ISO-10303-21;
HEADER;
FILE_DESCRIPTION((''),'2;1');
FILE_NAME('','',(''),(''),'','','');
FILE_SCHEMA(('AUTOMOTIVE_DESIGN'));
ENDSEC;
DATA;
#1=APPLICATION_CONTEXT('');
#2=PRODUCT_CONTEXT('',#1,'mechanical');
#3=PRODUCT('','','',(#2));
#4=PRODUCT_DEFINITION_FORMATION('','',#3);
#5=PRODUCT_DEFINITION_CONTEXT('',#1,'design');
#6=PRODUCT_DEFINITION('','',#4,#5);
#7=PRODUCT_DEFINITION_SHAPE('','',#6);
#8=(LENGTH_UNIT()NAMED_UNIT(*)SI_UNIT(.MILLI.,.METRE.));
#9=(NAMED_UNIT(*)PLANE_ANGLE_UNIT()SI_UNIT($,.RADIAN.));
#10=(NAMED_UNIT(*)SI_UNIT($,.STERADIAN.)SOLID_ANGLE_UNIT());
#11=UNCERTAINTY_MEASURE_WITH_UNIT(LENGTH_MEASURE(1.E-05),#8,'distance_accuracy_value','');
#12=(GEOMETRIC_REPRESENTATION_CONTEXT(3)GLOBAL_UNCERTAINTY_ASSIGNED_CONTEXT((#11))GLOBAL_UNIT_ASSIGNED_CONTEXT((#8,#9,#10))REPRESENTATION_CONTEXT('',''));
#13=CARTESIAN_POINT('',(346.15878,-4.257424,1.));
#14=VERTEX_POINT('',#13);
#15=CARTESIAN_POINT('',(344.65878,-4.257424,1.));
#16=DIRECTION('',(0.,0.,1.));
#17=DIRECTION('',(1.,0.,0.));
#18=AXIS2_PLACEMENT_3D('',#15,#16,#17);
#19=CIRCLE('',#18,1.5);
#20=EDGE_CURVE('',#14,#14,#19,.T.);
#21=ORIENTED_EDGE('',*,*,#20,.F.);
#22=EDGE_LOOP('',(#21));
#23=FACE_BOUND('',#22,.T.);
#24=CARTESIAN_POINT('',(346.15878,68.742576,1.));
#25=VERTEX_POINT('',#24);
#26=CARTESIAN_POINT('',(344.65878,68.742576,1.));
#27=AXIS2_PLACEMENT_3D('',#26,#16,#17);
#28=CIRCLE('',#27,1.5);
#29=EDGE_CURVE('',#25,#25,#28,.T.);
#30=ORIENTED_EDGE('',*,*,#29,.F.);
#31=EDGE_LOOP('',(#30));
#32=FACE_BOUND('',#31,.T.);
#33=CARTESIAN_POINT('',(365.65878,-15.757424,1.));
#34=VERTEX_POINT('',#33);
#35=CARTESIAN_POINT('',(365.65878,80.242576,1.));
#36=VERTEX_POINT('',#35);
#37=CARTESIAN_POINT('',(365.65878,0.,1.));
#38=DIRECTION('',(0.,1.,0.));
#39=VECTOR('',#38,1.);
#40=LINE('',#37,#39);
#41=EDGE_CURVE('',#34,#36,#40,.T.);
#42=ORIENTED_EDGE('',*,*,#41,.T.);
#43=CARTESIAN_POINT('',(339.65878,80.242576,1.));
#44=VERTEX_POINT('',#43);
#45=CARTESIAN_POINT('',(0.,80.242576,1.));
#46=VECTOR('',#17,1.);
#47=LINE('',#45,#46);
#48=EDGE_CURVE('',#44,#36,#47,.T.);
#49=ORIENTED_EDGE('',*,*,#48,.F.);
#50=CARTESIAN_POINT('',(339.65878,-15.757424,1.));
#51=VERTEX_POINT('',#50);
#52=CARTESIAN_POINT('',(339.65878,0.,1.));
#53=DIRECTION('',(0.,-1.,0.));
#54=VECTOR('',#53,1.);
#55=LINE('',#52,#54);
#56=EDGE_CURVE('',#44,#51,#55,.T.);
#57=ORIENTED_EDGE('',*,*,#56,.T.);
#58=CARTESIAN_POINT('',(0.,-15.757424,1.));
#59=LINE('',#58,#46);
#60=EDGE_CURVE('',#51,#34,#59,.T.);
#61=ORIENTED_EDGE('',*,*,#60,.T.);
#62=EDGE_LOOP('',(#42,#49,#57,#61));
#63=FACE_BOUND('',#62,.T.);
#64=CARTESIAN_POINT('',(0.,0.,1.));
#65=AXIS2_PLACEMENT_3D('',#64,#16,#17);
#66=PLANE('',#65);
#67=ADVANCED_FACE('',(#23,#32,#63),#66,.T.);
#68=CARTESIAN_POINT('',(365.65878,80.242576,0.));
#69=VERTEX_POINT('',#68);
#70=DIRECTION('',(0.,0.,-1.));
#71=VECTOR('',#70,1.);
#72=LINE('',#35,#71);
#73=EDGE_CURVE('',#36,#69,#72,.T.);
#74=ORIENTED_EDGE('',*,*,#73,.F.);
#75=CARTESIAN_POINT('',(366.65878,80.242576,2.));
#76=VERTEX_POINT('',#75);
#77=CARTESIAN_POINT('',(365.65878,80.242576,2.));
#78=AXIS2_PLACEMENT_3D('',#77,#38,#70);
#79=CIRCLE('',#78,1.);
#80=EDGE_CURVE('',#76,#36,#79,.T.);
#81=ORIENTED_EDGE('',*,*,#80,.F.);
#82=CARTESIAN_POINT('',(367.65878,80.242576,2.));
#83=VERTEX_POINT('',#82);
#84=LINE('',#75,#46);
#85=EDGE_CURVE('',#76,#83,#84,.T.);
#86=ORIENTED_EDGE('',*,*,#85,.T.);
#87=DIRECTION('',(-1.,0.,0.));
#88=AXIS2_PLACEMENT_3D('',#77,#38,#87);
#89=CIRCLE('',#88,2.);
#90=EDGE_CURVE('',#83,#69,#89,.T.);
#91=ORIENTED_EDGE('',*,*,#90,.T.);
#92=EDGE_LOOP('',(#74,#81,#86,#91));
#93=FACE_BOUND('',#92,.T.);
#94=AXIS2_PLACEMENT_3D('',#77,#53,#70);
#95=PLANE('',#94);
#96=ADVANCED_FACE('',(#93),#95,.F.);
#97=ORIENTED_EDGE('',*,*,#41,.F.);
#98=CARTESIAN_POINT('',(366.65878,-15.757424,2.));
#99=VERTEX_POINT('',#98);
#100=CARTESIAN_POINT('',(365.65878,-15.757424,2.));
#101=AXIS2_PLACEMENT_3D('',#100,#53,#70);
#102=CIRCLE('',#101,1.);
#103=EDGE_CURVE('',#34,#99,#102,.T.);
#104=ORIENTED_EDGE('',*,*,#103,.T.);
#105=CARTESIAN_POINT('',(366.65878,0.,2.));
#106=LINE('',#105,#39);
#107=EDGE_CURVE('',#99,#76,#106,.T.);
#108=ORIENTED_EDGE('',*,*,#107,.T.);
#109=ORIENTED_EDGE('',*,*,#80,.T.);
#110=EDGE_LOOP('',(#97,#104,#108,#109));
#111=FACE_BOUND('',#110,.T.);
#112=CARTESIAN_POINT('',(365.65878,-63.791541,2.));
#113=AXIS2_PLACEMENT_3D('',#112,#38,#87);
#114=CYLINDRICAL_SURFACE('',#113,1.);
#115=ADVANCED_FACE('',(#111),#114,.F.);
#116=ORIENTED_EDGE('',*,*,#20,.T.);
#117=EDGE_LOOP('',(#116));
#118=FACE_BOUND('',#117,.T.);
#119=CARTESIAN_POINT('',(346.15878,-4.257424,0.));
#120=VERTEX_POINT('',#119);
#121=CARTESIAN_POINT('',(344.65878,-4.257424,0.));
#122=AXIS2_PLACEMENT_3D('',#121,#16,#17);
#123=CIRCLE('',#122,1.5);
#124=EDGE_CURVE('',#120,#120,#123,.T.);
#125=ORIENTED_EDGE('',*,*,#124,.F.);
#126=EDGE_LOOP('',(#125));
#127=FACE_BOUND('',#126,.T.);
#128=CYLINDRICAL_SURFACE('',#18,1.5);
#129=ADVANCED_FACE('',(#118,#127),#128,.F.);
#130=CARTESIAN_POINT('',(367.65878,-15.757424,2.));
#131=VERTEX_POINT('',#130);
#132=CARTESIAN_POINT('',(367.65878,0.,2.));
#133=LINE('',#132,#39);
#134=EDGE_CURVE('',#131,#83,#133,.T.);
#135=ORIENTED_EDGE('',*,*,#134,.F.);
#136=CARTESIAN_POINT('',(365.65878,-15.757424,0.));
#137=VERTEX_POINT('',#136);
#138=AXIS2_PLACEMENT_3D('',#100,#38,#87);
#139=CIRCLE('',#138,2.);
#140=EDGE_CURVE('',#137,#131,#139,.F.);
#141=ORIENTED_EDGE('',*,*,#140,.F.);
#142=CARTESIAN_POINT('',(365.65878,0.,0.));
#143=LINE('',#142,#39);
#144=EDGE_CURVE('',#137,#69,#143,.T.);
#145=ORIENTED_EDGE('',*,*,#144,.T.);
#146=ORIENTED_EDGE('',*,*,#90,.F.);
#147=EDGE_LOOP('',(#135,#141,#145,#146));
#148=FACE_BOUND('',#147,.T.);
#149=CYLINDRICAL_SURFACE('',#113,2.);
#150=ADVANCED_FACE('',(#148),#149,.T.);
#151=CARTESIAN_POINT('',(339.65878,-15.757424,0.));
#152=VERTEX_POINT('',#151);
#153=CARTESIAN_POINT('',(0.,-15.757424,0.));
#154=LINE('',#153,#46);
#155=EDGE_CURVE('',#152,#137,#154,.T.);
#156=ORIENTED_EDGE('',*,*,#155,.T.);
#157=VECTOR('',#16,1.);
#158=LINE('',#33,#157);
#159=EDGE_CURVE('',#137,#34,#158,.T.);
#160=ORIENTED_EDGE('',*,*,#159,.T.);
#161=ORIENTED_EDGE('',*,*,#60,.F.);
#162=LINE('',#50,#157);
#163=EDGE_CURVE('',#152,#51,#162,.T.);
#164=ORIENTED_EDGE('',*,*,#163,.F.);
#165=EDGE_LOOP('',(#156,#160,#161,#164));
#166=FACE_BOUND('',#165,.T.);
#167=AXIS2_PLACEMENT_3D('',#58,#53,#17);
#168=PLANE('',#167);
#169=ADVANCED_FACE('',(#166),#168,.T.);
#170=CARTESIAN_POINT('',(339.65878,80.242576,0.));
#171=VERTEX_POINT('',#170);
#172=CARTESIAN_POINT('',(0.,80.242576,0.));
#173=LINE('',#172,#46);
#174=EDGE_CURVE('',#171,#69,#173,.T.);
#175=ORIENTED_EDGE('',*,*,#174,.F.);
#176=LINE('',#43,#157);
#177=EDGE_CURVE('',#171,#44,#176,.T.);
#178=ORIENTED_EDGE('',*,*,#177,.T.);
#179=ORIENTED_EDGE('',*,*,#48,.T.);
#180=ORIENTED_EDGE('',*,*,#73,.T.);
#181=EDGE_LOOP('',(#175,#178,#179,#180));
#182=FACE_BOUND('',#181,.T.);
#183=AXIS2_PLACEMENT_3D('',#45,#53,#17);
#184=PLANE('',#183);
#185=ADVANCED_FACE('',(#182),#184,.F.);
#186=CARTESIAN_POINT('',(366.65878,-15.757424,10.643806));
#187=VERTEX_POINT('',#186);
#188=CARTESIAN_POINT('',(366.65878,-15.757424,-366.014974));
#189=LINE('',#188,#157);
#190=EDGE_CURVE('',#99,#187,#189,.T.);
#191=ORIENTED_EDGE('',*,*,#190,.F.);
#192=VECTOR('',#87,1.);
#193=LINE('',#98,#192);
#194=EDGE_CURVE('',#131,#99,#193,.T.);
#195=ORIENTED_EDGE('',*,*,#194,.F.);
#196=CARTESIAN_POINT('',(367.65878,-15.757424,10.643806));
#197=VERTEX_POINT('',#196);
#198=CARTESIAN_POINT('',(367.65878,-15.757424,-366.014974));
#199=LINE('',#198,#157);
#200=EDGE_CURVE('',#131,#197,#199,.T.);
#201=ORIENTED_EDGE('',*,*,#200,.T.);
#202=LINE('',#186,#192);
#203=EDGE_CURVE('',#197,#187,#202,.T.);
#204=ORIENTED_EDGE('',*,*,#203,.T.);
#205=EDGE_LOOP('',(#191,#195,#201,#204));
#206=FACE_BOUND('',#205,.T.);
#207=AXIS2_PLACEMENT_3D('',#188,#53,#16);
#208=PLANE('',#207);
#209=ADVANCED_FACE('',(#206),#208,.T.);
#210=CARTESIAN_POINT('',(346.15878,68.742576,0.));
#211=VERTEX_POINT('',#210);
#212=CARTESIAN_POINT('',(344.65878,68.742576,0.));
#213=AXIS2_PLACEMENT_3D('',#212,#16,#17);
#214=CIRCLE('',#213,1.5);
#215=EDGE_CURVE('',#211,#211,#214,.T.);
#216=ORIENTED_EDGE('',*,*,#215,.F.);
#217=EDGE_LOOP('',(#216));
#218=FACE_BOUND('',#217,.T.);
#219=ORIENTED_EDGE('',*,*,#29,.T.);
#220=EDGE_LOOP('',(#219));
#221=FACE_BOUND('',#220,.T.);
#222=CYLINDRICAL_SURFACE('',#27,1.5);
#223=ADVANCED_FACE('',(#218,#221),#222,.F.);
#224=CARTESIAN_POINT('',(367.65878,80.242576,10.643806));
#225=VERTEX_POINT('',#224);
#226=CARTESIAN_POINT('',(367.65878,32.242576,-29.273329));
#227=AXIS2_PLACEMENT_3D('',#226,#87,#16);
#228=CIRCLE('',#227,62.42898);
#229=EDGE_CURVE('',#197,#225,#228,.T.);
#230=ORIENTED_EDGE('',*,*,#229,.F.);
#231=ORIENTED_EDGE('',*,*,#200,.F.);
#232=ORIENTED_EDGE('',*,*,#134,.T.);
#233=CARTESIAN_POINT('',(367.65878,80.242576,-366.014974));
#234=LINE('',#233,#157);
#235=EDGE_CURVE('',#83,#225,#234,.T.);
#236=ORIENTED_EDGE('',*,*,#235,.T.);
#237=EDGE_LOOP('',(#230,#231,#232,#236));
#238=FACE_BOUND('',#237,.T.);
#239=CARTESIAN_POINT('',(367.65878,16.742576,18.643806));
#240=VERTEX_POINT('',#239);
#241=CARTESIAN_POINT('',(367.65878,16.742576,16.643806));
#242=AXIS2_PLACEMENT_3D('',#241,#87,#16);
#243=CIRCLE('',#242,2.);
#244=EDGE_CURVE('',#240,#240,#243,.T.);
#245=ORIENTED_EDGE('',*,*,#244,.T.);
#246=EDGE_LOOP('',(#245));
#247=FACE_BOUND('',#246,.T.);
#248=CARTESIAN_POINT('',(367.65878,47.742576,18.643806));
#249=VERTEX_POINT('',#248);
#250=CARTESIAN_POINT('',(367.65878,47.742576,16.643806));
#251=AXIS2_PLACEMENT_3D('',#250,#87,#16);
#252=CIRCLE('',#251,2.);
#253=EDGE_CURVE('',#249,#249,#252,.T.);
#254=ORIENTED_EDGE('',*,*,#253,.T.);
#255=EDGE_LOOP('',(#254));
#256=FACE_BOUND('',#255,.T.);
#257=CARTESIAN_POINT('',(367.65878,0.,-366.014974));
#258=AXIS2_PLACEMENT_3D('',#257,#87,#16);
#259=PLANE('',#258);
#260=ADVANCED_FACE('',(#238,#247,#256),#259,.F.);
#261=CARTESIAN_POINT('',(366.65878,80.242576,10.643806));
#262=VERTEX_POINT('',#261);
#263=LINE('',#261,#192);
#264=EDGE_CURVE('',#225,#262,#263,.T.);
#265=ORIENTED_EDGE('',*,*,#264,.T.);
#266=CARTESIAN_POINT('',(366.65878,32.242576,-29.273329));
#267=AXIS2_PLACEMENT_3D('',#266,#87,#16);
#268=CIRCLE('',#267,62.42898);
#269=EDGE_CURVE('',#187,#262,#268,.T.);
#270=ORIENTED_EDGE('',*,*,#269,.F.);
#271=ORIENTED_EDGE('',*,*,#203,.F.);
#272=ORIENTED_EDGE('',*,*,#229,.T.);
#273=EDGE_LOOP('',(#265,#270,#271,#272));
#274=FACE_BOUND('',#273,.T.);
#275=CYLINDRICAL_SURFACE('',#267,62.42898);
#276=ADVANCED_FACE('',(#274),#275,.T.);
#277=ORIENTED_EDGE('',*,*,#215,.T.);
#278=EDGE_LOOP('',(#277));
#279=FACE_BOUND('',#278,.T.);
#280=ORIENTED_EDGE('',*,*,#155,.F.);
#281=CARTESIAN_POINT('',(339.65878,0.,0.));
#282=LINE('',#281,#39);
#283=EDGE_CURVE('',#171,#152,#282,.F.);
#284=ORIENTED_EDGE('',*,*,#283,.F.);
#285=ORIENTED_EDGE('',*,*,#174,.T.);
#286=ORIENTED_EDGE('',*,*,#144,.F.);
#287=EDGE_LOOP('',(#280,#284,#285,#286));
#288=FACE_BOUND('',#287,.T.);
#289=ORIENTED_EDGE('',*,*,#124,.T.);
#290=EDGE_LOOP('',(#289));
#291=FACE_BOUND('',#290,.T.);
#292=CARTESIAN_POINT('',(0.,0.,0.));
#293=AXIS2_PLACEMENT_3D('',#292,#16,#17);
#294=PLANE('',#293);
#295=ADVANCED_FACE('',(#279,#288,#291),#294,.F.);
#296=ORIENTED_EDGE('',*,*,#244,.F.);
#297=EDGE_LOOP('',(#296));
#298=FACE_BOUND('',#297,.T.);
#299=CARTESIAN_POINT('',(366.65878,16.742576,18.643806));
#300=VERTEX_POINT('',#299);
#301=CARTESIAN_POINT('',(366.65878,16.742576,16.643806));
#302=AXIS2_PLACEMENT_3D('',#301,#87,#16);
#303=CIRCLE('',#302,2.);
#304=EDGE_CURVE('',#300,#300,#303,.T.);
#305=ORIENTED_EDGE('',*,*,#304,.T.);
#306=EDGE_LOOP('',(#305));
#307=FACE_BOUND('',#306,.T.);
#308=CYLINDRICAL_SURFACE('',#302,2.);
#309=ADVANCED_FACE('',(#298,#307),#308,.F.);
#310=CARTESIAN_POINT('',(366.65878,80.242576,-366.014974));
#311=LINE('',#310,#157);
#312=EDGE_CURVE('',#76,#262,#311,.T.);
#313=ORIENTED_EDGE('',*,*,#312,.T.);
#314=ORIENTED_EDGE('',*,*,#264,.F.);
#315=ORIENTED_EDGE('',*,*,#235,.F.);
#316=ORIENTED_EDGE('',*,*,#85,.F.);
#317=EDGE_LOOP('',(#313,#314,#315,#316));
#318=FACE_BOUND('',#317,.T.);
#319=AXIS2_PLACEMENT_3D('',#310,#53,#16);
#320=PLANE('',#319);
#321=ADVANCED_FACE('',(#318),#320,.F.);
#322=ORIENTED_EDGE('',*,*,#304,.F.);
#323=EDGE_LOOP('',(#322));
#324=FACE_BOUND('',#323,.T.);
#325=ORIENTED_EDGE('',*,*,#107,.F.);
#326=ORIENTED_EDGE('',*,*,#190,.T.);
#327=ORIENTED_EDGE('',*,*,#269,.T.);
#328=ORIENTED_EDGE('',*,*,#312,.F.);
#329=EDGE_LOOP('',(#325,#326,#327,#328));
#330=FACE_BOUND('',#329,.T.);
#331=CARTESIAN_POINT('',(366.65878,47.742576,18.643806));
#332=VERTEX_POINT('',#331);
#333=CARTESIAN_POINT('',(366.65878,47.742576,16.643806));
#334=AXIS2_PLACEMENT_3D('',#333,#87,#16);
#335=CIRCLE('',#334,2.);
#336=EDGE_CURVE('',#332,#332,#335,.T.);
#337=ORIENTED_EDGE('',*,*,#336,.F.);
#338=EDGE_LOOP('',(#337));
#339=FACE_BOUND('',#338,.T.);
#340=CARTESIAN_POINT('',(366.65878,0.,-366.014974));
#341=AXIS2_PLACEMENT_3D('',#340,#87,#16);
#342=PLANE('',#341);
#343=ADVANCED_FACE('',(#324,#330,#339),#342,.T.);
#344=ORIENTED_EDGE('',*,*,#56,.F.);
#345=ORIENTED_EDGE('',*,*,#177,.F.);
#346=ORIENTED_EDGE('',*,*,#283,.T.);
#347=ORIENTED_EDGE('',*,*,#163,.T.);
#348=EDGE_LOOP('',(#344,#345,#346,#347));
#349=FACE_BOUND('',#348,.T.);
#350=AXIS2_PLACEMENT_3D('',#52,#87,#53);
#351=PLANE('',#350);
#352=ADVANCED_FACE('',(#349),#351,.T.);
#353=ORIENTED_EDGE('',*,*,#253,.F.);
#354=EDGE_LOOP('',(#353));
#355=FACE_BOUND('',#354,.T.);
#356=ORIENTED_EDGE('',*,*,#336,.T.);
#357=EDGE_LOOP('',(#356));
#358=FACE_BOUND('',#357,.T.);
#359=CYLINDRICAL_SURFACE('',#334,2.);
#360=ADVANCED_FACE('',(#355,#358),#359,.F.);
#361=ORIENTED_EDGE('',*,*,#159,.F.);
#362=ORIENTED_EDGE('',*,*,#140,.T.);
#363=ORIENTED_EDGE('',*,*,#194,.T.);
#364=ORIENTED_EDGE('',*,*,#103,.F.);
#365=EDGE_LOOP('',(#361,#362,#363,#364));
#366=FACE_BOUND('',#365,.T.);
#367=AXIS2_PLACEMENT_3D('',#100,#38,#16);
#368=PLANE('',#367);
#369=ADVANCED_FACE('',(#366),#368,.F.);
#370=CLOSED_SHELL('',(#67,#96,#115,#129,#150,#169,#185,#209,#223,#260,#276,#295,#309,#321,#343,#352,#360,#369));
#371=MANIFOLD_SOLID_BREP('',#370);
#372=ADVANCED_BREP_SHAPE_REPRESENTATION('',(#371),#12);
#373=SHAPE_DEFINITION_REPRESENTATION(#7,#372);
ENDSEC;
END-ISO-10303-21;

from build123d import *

# Parameters (mm, degrees)
IZIM1_W                     = 27
IZIM1_H                     = 96
IZIM1_R                     = 1.5
IZIM1_R_2                   = 2
Y_KSEKLIK_EKSTR_ZYON1_DEPTH = 1
IZGIDEN_START               = 367.447539798
IZGIDEN_B_KME1_OUTLINE_W    = 96
IZGIDEN_B_KME1_OUTLINE_H    = 1
IZGIDEN_B_KME1_DEPTH        = 32.552460202
IZGIDEN_START_2             = 365.658779798
IZGIDEN_B_KME1_2_OUTLINE_R  = 2
IZGIDEN_B_KME1_2_DEPTH      = 2
IZGIDEN_START_3             = -15.757423971
IZGIDEN_B_KME1_3_DEPTH      = 96


with BuildPart() as part:
    # Çizim1 → Yükseklik-Ekstrüzyon1 (new body)
    # profile 1 of 2: a face of its own
    with BuildSketch(Plane.XY):
        with Locations((353.158779798, 32.242576029)):
            Rectangle(IZIM1_W, IZIM1_H)
        with Locations((344.658779798, -4.257423971)):
            Circle(IZIM1_R, mode=Mode.SUBTRACT)
        with Locations((344.658779798, 68.742576029)):
            Circle(IZIM1_R, mode=Mode.SUBTRACT)
    # profile 2 of 2: a face of its own
    with BuildSketch(Plane.XY):
        with BuildLine():
            Line((376.658779798, 80.242576029), (366.658779798, 80.242576029))
            Line((366.658779798, 80.242576029), (366.658779798, -15.757423971))
            Line((366.658779798, -15.757423971), (376.658779798, -15.757423971))
            ThreePointArc((376.658779798, -15.757423971), (399.170626089, 32.242576029), (376.658779798, 80.242576029))
        make_face()
        with Locations((382.658779798, 16.742576029)):
            Circle(IZIM1_R_2, mode=Mode.SUBTRACT)
        with Locations((382.658779798, 47.742576029)):
            Circle(IZIM1_R_2, mode=Mode.SUBTRACT)
    extrude(amount=Y_KSEKLIK_EKSTR_ZYON1_DEPTH)

    # Çizgiden Bükme1: read off the stored shape, not the designer's step
    # Çizgiden Bükme1 outline → Çizgiden Bükme1 (cut)
    with BuildSketch(Plane.YZ.offset(IZGIDEN_START)):
        with Locations((32.242576029, 0.5)):
            Rectangle(IZGIDEN_B_KME1_OUTLINE_W, IZGIDEN_B_KME1_OUTLINE_H)
    extrude(amount=IZGIDEN_B_KME1_DEPTH, mode=Mode.SUBTRACT)

    # izgiden B_kme1 2 outline → izgiden B_kme1 2 (add)
    with BuildSketch(Plane.YZ.offset(IZGIDEN_START_2)):
        with BuildLine():
            Line((80.242576029, 1), (80.242576029, 10.64380551))
            ThreePointArc((80.242576029, 10.64380551), (32.242576029, 33.155651801), (-15.757423971, 10.64380551))
            Line((-15.757423971, 10.64380551), (-15.757423971, 1))
            Line((-15.757423971, 1), (80.242576029, 1))
        make_face()
        with Locations((16.742576029, 16.64380551)):
            Circle(IZGIDEN_B_KME1_2_OUTLINE_R, mode=Mode.SUBTRACT)
        with Locations((47.742576029, 16.64380551)):
            Circle(IZGIDEN_B_KME1_2_OUTLINE_R, mode=Mode.SUBTRACT)
    extrude(amount=IZGIDEN_B_KME1_2_DEPTH)

    # izgiden B_kme1 3 outline → izgiden B_kme1 3 (cut)
    with BuildSketch(Plane(origin=(0, 0, 0), x_dir=(1, 0, 0), z_dir=(0, 1, 0)).offset(IZGIDEN_START_3)):
        with BuildLine():
            Line((366.658779798, -35), (366.658779798, -2))
            ThreePointArc((366.658779798, -2), (366.365886579, -1.292893219), (365.658779798, -1))
            Line((365.658779798, -1), (365.658779798, -35))
            Line((365.658779798, -35), (366.658779798, -35))
        make_face()
        with BuildLine():
            Line((367.658779798, -2), (367.658779819, -35))
            Line((367.658779819, -35), (369, -35))
            Line((369, -35), (369, -1))
            Line((369, -1), (367.447539798, -1))
            Line((367.447539798, -1), (367.447539798, 1))
            Line((367.447539798, 1), (364, 1))
            Line((364, 1), (364, 1e-09))
            Line((364, 1e-09), (365.658779798, 0))
            ThreePointArc((365.658779798, 0), (367.07299336, -0.585786438), (367.658779798, -2))
        make_face()
    extrude(amount=IZGIDEN_B_KME1_3_DEPTH, mode=Mode.SUBTRACT)


solid = part.part
